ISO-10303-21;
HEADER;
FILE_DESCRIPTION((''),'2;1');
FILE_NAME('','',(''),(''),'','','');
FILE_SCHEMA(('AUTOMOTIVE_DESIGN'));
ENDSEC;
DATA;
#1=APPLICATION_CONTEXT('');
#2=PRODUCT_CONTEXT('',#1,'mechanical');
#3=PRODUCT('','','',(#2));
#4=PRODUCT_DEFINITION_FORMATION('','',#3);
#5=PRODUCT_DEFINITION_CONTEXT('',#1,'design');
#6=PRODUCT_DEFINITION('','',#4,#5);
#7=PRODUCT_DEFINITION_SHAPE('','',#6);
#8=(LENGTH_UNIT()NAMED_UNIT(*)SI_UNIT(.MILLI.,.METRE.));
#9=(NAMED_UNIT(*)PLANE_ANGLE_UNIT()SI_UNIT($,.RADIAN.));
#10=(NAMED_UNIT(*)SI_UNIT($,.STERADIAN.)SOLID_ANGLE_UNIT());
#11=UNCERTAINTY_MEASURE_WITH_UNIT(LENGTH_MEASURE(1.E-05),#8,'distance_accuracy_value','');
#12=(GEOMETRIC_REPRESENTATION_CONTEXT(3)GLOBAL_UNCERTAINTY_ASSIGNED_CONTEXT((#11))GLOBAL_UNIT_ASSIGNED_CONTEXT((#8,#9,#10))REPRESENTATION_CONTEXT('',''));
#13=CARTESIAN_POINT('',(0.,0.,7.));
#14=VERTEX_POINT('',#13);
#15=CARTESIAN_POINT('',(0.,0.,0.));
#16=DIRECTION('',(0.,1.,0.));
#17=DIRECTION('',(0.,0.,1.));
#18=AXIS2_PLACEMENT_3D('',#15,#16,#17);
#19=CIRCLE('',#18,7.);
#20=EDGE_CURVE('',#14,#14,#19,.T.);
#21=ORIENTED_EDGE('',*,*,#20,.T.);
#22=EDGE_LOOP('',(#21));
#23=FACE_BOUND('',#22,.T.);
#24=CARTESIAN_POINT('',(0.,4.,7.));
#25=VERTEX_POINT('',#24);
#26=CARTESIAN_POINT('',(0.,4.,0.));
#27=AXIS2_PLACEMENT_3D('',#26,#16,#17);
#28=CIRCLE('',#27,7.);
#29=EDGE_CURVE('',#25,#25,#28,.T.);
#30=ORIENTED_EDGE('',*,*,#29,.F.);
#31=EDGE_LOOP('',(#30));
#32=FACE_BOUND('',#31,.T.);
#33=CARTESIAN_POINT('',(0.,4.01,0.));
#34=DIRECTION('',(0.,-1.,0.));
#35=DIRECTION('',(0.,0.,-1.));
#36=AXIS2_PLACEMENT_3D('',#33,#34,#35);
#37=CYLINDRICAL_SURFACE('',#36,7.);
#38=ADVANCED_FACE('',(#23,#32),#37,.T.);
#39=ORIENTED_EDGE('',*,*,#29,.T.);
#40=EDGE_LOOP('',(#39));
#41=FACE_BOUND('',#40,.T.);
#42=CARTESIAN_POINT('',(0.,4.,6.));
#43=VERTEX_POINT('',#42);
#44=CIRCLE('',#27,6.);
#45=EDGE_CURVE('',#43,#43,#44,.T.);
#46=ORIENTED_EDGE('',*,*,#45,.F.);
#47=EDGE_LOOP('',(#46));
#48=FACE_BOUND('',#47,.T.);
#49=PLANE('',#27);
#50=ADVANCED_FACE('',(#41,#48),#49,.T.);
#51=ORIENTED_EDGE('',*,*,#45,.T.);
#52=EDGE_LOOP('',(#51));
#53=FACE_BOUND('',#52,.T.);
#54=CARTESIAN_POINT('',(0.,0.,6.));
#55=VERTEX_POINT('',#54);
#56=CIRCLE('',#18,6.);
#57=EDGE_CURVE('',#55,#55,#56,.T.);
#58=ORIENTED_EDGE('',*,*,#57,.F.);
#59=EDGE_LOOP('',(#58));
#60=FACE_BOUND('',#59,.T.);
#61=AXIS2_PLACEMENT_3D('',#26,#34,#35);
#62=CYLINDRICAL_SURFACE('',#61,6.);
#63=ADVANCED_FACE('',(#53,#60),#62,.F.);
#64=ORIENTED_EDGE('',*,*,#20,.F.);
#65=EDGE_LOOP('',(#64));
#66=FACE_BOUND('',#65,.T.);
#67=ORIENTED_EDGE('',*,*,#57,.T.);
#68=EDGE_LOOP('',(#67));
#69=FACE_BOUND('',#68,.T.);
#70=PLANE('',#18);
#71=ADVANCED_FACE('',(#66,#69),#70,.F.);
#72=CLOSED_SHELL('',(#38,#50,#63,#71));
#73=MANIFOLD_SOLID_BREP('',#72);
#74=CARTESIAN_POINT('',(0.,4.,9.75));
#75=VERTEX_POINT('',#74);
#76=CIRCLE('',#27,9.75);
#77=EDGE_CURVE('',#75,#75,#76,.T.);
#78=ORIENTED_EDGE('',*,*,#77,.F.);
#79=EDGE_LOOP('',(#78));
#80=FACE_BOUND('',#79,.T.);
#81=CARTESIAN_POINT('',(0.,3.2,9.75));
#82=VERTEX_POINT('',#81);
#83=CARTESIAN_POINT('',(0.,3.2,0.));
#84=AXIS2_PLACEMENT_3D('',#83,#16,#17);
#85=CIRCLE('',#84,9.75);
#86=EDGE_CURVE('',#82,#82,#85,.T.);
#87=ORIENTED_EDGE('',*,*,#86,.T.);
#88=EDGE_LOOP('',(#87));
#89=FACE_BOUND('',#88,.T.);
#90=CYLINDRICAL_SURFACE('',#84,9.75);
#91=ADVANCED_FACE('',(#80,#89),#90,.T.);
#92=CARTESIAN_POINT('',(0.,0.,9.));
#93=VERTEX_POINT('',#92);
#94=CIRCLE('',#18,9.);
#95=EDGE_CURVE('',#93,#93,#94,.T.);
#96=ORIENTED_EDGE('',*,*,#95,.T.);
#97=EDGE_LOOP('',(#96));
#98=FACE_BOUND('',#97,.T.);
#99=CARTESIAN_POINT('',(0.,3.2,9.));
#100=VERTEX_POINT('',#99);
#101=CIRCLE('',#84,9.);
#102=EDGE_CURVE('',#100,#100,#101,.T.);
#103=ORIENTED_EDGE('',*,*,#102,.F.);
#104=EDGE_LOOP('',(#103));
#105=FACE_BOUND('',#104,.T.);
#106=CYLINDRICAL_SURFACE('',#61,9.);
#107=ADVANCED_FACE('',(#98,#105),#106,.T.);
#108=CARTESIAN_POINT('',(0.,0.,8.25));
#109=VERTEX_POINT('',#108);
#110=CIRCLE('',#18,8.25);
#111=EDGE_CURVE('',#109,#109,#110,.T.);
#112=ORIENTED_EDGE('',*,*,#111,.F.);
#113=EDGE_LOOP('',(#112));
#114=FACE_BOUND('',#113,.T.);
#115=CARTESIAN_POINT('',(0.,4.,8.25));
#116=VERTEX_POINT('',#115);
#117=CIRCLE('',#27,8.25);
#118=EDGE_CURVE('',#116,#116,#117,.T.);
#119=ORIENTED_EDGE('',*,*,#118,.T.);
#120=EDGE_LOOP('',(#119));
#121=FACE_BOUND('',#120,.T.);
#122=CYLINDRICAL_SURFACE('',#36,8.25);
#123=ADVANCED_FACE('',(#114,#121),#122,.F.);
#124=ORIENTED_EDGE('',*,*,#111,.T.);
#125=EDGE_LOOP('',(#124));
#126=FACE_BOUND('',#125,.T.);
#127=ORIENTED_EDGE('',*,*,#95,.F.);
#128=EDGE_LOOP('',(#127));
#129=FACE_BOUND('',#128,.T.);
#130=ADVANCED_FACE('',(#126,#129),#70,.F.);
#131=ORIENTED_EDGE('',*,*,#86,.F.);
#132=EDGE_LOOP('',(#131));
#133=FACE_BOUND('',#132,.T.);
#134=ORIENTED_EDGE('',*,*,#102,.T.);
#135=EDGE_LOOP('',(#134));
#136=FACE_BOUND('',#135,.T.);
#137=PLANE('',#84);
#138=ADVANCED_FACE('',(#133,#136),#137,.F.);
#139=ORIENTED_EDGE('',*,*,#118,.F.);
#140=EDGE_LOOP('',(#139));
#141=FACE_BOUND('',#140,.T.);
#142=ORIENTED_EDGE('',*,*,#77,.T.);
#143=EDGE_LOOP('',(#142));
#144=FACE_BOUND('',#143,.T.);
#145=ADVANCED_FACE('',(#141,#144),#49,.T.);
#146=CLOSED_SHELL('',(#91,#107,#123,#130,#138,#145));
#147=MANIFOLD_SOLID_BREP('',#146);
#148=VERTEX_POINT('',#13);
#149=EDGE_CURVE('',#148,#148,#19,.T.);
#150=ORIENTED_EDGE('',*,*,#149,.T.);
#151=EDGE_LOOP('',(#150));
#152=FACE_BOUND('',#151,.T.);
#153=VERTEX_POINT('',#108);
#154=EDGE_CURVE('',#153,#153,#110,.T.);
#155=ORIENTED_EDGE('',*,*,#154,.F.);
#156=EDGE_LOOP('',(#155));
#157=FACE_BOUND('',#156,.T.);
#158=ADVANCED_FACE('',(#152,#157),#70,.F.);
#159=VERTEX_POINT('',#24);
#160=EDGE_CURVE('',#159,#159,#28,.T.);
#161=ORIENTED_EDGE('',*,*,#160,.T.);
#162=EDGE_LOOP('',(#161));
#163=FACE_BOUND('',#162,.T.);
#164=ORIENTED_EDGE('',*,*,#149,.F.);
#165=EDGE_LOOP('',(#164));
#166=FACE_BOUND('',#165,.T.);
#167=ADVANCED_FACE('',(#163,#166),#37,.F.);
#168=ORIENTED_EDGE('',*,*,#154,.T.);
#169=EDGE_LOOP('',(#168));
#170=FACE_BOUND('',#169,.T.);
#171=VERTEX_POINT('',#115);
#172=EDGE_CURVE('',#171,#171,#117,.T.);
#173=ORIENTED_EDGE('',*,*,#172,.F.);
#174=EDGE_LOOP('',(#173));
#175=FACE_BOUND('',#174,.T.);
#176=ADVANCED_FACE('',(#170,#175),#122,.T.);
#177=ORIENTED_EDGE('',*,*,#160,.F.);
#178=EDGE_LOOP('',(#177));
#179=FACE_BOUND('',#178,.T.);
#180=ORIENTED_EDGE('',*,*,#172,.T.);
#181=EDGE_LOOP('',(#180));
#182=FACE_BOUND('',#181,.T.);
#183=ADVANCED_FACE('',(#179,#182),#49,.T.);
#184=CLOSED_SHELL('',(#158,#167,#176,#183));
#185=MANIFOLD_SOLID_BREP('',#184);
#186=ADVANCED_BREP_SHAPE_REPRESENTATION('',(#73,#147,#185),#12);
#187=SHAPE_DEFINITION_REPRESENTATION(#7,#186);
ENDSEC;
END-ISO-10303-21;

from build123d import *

# Parameters (mm, degrees)
SKETCH_1_R                   = 9
SKETCH_1_R_2                 = 6
EXTRUDE_1_DEPTH              = 4
EXTRUDE_START                = -0.8
SKETCH_2_R                   = 9.75
SKETCH_2_R_2                 = 6
EXTRUDE_2_DEPTH              = 0.8
SPLIT_BODIES_1_OUTLINE_R     = 8.25
SPLIT_BODIES_1_OUTLINE_R_2   = 7
SPLIT_BODIES_1_DEPTH         = 4
SPLIT_BODIES_1_2_OUTLINE_R   = 7
SPLIT_BODIES_1_2_OUTLINE_R_2 = 6
SPLIT_BODIES_1_2_DEPTH       = 4
SPLIT_BODIES_1_3_OUTLINE_R   = 8.25
SPLIT_BODIES_1_3_OUTLINE_R_2 = 6
SPLIT_BODIES_1_3_DEPTH       = 4


# Read off the part's stored shape, not the designer's step: 分割1
with BuildPart() as part:
    # 草图1 → 凸台-拉伸1 (new body)
    with BuildSketch(Plane(origin=(0, 0, 0), x_dir=(1, 0, 0), z_dir=(0, 1, 0))):
        with Locations(Location((0, 0, 0), (0, 0, 270))):
            Circle(SKETCH_1_R)
        with Locations(Location((0, 0, 0), (0, 0, 270))):
            Circle(SKETCH_1_R_2, mode=Mode.SUBTRACT)
    extrude(amount=EXTRUDE_1_DEPTH)

    # 草图2 → 凸台-拉伸2 (add)
    with BuildSketch(Plane(origin=(0, 4, 0), x_dir=(1, 0, 0), z_dir=(0, 1, 0)).offset(EXTRUDE_START)):
        with Locations(Location((0, 0, 0), (0, 0, 270))):
            Circle(SKETCH_2_R)
        with Locations(Location((0, 0, 0), (0, 0, 270))):
            Circle(SKETCH_2_R_2, mode=Mode.SUBTRACT)
    extrude(amount=EXTRUDE_2_DEPTH)

    # Split Bodies 1 3 outline → Split Bodies 1 3 (cut)
    with BuildSketch(Plane(origin=(0, 0, 0), x_dir=(1, 0, 0), z_dir=(0, 1, 0))):
        Circle(SPLIT_BODIES_1_3_OUTLINE_R)
        Circle(SPLIT_BODIES_1_3_OUTLINE_R_2, mode=Mode.SUBTRACT)
    extrude(amount=SPLIT_BODIES_1_3_DEPTH, mode=Mode.SUBTRACT)


with BuildPart() as body_2:
    # Split Bodies 1 outline → Split Bodies 1 (new body)
    with BuildSketch(Plane(origin=(0, 0, 0), x_dir=(1, 0, 0), z_dir=(0, 1, 0))):
        Circle(SPLIT_BODIES_1_OUTLINE_R)
        Circle(SPLIT_BODIES_1_OUTLINE_R_2, mode=Mode.SUBTRACT)
    extrude(amount=SPLIT_BODIES_1_DEPTH)


with BuildPart() as body_3:
    # Split Bodies 1 2 outline → Split Bodies 1 2 (new body)
    with BuildSketch(Plane(origin=(0, 0, 0), x_dir=(1, 0, 0), z_dir=(0, 1, 0))):
        Circle(SPLIT_BODIES_1_2_OUTLINE_R)
        Circle(SPLIT_BODIES_1_2_OUTLINE_R_2, mode=Mode.SUBTRACT)
    extrude(amount=SPLIT_BODIES_1_2_DEPTH)


solid = Compound([part.part, body_2.part, body_3.part])
